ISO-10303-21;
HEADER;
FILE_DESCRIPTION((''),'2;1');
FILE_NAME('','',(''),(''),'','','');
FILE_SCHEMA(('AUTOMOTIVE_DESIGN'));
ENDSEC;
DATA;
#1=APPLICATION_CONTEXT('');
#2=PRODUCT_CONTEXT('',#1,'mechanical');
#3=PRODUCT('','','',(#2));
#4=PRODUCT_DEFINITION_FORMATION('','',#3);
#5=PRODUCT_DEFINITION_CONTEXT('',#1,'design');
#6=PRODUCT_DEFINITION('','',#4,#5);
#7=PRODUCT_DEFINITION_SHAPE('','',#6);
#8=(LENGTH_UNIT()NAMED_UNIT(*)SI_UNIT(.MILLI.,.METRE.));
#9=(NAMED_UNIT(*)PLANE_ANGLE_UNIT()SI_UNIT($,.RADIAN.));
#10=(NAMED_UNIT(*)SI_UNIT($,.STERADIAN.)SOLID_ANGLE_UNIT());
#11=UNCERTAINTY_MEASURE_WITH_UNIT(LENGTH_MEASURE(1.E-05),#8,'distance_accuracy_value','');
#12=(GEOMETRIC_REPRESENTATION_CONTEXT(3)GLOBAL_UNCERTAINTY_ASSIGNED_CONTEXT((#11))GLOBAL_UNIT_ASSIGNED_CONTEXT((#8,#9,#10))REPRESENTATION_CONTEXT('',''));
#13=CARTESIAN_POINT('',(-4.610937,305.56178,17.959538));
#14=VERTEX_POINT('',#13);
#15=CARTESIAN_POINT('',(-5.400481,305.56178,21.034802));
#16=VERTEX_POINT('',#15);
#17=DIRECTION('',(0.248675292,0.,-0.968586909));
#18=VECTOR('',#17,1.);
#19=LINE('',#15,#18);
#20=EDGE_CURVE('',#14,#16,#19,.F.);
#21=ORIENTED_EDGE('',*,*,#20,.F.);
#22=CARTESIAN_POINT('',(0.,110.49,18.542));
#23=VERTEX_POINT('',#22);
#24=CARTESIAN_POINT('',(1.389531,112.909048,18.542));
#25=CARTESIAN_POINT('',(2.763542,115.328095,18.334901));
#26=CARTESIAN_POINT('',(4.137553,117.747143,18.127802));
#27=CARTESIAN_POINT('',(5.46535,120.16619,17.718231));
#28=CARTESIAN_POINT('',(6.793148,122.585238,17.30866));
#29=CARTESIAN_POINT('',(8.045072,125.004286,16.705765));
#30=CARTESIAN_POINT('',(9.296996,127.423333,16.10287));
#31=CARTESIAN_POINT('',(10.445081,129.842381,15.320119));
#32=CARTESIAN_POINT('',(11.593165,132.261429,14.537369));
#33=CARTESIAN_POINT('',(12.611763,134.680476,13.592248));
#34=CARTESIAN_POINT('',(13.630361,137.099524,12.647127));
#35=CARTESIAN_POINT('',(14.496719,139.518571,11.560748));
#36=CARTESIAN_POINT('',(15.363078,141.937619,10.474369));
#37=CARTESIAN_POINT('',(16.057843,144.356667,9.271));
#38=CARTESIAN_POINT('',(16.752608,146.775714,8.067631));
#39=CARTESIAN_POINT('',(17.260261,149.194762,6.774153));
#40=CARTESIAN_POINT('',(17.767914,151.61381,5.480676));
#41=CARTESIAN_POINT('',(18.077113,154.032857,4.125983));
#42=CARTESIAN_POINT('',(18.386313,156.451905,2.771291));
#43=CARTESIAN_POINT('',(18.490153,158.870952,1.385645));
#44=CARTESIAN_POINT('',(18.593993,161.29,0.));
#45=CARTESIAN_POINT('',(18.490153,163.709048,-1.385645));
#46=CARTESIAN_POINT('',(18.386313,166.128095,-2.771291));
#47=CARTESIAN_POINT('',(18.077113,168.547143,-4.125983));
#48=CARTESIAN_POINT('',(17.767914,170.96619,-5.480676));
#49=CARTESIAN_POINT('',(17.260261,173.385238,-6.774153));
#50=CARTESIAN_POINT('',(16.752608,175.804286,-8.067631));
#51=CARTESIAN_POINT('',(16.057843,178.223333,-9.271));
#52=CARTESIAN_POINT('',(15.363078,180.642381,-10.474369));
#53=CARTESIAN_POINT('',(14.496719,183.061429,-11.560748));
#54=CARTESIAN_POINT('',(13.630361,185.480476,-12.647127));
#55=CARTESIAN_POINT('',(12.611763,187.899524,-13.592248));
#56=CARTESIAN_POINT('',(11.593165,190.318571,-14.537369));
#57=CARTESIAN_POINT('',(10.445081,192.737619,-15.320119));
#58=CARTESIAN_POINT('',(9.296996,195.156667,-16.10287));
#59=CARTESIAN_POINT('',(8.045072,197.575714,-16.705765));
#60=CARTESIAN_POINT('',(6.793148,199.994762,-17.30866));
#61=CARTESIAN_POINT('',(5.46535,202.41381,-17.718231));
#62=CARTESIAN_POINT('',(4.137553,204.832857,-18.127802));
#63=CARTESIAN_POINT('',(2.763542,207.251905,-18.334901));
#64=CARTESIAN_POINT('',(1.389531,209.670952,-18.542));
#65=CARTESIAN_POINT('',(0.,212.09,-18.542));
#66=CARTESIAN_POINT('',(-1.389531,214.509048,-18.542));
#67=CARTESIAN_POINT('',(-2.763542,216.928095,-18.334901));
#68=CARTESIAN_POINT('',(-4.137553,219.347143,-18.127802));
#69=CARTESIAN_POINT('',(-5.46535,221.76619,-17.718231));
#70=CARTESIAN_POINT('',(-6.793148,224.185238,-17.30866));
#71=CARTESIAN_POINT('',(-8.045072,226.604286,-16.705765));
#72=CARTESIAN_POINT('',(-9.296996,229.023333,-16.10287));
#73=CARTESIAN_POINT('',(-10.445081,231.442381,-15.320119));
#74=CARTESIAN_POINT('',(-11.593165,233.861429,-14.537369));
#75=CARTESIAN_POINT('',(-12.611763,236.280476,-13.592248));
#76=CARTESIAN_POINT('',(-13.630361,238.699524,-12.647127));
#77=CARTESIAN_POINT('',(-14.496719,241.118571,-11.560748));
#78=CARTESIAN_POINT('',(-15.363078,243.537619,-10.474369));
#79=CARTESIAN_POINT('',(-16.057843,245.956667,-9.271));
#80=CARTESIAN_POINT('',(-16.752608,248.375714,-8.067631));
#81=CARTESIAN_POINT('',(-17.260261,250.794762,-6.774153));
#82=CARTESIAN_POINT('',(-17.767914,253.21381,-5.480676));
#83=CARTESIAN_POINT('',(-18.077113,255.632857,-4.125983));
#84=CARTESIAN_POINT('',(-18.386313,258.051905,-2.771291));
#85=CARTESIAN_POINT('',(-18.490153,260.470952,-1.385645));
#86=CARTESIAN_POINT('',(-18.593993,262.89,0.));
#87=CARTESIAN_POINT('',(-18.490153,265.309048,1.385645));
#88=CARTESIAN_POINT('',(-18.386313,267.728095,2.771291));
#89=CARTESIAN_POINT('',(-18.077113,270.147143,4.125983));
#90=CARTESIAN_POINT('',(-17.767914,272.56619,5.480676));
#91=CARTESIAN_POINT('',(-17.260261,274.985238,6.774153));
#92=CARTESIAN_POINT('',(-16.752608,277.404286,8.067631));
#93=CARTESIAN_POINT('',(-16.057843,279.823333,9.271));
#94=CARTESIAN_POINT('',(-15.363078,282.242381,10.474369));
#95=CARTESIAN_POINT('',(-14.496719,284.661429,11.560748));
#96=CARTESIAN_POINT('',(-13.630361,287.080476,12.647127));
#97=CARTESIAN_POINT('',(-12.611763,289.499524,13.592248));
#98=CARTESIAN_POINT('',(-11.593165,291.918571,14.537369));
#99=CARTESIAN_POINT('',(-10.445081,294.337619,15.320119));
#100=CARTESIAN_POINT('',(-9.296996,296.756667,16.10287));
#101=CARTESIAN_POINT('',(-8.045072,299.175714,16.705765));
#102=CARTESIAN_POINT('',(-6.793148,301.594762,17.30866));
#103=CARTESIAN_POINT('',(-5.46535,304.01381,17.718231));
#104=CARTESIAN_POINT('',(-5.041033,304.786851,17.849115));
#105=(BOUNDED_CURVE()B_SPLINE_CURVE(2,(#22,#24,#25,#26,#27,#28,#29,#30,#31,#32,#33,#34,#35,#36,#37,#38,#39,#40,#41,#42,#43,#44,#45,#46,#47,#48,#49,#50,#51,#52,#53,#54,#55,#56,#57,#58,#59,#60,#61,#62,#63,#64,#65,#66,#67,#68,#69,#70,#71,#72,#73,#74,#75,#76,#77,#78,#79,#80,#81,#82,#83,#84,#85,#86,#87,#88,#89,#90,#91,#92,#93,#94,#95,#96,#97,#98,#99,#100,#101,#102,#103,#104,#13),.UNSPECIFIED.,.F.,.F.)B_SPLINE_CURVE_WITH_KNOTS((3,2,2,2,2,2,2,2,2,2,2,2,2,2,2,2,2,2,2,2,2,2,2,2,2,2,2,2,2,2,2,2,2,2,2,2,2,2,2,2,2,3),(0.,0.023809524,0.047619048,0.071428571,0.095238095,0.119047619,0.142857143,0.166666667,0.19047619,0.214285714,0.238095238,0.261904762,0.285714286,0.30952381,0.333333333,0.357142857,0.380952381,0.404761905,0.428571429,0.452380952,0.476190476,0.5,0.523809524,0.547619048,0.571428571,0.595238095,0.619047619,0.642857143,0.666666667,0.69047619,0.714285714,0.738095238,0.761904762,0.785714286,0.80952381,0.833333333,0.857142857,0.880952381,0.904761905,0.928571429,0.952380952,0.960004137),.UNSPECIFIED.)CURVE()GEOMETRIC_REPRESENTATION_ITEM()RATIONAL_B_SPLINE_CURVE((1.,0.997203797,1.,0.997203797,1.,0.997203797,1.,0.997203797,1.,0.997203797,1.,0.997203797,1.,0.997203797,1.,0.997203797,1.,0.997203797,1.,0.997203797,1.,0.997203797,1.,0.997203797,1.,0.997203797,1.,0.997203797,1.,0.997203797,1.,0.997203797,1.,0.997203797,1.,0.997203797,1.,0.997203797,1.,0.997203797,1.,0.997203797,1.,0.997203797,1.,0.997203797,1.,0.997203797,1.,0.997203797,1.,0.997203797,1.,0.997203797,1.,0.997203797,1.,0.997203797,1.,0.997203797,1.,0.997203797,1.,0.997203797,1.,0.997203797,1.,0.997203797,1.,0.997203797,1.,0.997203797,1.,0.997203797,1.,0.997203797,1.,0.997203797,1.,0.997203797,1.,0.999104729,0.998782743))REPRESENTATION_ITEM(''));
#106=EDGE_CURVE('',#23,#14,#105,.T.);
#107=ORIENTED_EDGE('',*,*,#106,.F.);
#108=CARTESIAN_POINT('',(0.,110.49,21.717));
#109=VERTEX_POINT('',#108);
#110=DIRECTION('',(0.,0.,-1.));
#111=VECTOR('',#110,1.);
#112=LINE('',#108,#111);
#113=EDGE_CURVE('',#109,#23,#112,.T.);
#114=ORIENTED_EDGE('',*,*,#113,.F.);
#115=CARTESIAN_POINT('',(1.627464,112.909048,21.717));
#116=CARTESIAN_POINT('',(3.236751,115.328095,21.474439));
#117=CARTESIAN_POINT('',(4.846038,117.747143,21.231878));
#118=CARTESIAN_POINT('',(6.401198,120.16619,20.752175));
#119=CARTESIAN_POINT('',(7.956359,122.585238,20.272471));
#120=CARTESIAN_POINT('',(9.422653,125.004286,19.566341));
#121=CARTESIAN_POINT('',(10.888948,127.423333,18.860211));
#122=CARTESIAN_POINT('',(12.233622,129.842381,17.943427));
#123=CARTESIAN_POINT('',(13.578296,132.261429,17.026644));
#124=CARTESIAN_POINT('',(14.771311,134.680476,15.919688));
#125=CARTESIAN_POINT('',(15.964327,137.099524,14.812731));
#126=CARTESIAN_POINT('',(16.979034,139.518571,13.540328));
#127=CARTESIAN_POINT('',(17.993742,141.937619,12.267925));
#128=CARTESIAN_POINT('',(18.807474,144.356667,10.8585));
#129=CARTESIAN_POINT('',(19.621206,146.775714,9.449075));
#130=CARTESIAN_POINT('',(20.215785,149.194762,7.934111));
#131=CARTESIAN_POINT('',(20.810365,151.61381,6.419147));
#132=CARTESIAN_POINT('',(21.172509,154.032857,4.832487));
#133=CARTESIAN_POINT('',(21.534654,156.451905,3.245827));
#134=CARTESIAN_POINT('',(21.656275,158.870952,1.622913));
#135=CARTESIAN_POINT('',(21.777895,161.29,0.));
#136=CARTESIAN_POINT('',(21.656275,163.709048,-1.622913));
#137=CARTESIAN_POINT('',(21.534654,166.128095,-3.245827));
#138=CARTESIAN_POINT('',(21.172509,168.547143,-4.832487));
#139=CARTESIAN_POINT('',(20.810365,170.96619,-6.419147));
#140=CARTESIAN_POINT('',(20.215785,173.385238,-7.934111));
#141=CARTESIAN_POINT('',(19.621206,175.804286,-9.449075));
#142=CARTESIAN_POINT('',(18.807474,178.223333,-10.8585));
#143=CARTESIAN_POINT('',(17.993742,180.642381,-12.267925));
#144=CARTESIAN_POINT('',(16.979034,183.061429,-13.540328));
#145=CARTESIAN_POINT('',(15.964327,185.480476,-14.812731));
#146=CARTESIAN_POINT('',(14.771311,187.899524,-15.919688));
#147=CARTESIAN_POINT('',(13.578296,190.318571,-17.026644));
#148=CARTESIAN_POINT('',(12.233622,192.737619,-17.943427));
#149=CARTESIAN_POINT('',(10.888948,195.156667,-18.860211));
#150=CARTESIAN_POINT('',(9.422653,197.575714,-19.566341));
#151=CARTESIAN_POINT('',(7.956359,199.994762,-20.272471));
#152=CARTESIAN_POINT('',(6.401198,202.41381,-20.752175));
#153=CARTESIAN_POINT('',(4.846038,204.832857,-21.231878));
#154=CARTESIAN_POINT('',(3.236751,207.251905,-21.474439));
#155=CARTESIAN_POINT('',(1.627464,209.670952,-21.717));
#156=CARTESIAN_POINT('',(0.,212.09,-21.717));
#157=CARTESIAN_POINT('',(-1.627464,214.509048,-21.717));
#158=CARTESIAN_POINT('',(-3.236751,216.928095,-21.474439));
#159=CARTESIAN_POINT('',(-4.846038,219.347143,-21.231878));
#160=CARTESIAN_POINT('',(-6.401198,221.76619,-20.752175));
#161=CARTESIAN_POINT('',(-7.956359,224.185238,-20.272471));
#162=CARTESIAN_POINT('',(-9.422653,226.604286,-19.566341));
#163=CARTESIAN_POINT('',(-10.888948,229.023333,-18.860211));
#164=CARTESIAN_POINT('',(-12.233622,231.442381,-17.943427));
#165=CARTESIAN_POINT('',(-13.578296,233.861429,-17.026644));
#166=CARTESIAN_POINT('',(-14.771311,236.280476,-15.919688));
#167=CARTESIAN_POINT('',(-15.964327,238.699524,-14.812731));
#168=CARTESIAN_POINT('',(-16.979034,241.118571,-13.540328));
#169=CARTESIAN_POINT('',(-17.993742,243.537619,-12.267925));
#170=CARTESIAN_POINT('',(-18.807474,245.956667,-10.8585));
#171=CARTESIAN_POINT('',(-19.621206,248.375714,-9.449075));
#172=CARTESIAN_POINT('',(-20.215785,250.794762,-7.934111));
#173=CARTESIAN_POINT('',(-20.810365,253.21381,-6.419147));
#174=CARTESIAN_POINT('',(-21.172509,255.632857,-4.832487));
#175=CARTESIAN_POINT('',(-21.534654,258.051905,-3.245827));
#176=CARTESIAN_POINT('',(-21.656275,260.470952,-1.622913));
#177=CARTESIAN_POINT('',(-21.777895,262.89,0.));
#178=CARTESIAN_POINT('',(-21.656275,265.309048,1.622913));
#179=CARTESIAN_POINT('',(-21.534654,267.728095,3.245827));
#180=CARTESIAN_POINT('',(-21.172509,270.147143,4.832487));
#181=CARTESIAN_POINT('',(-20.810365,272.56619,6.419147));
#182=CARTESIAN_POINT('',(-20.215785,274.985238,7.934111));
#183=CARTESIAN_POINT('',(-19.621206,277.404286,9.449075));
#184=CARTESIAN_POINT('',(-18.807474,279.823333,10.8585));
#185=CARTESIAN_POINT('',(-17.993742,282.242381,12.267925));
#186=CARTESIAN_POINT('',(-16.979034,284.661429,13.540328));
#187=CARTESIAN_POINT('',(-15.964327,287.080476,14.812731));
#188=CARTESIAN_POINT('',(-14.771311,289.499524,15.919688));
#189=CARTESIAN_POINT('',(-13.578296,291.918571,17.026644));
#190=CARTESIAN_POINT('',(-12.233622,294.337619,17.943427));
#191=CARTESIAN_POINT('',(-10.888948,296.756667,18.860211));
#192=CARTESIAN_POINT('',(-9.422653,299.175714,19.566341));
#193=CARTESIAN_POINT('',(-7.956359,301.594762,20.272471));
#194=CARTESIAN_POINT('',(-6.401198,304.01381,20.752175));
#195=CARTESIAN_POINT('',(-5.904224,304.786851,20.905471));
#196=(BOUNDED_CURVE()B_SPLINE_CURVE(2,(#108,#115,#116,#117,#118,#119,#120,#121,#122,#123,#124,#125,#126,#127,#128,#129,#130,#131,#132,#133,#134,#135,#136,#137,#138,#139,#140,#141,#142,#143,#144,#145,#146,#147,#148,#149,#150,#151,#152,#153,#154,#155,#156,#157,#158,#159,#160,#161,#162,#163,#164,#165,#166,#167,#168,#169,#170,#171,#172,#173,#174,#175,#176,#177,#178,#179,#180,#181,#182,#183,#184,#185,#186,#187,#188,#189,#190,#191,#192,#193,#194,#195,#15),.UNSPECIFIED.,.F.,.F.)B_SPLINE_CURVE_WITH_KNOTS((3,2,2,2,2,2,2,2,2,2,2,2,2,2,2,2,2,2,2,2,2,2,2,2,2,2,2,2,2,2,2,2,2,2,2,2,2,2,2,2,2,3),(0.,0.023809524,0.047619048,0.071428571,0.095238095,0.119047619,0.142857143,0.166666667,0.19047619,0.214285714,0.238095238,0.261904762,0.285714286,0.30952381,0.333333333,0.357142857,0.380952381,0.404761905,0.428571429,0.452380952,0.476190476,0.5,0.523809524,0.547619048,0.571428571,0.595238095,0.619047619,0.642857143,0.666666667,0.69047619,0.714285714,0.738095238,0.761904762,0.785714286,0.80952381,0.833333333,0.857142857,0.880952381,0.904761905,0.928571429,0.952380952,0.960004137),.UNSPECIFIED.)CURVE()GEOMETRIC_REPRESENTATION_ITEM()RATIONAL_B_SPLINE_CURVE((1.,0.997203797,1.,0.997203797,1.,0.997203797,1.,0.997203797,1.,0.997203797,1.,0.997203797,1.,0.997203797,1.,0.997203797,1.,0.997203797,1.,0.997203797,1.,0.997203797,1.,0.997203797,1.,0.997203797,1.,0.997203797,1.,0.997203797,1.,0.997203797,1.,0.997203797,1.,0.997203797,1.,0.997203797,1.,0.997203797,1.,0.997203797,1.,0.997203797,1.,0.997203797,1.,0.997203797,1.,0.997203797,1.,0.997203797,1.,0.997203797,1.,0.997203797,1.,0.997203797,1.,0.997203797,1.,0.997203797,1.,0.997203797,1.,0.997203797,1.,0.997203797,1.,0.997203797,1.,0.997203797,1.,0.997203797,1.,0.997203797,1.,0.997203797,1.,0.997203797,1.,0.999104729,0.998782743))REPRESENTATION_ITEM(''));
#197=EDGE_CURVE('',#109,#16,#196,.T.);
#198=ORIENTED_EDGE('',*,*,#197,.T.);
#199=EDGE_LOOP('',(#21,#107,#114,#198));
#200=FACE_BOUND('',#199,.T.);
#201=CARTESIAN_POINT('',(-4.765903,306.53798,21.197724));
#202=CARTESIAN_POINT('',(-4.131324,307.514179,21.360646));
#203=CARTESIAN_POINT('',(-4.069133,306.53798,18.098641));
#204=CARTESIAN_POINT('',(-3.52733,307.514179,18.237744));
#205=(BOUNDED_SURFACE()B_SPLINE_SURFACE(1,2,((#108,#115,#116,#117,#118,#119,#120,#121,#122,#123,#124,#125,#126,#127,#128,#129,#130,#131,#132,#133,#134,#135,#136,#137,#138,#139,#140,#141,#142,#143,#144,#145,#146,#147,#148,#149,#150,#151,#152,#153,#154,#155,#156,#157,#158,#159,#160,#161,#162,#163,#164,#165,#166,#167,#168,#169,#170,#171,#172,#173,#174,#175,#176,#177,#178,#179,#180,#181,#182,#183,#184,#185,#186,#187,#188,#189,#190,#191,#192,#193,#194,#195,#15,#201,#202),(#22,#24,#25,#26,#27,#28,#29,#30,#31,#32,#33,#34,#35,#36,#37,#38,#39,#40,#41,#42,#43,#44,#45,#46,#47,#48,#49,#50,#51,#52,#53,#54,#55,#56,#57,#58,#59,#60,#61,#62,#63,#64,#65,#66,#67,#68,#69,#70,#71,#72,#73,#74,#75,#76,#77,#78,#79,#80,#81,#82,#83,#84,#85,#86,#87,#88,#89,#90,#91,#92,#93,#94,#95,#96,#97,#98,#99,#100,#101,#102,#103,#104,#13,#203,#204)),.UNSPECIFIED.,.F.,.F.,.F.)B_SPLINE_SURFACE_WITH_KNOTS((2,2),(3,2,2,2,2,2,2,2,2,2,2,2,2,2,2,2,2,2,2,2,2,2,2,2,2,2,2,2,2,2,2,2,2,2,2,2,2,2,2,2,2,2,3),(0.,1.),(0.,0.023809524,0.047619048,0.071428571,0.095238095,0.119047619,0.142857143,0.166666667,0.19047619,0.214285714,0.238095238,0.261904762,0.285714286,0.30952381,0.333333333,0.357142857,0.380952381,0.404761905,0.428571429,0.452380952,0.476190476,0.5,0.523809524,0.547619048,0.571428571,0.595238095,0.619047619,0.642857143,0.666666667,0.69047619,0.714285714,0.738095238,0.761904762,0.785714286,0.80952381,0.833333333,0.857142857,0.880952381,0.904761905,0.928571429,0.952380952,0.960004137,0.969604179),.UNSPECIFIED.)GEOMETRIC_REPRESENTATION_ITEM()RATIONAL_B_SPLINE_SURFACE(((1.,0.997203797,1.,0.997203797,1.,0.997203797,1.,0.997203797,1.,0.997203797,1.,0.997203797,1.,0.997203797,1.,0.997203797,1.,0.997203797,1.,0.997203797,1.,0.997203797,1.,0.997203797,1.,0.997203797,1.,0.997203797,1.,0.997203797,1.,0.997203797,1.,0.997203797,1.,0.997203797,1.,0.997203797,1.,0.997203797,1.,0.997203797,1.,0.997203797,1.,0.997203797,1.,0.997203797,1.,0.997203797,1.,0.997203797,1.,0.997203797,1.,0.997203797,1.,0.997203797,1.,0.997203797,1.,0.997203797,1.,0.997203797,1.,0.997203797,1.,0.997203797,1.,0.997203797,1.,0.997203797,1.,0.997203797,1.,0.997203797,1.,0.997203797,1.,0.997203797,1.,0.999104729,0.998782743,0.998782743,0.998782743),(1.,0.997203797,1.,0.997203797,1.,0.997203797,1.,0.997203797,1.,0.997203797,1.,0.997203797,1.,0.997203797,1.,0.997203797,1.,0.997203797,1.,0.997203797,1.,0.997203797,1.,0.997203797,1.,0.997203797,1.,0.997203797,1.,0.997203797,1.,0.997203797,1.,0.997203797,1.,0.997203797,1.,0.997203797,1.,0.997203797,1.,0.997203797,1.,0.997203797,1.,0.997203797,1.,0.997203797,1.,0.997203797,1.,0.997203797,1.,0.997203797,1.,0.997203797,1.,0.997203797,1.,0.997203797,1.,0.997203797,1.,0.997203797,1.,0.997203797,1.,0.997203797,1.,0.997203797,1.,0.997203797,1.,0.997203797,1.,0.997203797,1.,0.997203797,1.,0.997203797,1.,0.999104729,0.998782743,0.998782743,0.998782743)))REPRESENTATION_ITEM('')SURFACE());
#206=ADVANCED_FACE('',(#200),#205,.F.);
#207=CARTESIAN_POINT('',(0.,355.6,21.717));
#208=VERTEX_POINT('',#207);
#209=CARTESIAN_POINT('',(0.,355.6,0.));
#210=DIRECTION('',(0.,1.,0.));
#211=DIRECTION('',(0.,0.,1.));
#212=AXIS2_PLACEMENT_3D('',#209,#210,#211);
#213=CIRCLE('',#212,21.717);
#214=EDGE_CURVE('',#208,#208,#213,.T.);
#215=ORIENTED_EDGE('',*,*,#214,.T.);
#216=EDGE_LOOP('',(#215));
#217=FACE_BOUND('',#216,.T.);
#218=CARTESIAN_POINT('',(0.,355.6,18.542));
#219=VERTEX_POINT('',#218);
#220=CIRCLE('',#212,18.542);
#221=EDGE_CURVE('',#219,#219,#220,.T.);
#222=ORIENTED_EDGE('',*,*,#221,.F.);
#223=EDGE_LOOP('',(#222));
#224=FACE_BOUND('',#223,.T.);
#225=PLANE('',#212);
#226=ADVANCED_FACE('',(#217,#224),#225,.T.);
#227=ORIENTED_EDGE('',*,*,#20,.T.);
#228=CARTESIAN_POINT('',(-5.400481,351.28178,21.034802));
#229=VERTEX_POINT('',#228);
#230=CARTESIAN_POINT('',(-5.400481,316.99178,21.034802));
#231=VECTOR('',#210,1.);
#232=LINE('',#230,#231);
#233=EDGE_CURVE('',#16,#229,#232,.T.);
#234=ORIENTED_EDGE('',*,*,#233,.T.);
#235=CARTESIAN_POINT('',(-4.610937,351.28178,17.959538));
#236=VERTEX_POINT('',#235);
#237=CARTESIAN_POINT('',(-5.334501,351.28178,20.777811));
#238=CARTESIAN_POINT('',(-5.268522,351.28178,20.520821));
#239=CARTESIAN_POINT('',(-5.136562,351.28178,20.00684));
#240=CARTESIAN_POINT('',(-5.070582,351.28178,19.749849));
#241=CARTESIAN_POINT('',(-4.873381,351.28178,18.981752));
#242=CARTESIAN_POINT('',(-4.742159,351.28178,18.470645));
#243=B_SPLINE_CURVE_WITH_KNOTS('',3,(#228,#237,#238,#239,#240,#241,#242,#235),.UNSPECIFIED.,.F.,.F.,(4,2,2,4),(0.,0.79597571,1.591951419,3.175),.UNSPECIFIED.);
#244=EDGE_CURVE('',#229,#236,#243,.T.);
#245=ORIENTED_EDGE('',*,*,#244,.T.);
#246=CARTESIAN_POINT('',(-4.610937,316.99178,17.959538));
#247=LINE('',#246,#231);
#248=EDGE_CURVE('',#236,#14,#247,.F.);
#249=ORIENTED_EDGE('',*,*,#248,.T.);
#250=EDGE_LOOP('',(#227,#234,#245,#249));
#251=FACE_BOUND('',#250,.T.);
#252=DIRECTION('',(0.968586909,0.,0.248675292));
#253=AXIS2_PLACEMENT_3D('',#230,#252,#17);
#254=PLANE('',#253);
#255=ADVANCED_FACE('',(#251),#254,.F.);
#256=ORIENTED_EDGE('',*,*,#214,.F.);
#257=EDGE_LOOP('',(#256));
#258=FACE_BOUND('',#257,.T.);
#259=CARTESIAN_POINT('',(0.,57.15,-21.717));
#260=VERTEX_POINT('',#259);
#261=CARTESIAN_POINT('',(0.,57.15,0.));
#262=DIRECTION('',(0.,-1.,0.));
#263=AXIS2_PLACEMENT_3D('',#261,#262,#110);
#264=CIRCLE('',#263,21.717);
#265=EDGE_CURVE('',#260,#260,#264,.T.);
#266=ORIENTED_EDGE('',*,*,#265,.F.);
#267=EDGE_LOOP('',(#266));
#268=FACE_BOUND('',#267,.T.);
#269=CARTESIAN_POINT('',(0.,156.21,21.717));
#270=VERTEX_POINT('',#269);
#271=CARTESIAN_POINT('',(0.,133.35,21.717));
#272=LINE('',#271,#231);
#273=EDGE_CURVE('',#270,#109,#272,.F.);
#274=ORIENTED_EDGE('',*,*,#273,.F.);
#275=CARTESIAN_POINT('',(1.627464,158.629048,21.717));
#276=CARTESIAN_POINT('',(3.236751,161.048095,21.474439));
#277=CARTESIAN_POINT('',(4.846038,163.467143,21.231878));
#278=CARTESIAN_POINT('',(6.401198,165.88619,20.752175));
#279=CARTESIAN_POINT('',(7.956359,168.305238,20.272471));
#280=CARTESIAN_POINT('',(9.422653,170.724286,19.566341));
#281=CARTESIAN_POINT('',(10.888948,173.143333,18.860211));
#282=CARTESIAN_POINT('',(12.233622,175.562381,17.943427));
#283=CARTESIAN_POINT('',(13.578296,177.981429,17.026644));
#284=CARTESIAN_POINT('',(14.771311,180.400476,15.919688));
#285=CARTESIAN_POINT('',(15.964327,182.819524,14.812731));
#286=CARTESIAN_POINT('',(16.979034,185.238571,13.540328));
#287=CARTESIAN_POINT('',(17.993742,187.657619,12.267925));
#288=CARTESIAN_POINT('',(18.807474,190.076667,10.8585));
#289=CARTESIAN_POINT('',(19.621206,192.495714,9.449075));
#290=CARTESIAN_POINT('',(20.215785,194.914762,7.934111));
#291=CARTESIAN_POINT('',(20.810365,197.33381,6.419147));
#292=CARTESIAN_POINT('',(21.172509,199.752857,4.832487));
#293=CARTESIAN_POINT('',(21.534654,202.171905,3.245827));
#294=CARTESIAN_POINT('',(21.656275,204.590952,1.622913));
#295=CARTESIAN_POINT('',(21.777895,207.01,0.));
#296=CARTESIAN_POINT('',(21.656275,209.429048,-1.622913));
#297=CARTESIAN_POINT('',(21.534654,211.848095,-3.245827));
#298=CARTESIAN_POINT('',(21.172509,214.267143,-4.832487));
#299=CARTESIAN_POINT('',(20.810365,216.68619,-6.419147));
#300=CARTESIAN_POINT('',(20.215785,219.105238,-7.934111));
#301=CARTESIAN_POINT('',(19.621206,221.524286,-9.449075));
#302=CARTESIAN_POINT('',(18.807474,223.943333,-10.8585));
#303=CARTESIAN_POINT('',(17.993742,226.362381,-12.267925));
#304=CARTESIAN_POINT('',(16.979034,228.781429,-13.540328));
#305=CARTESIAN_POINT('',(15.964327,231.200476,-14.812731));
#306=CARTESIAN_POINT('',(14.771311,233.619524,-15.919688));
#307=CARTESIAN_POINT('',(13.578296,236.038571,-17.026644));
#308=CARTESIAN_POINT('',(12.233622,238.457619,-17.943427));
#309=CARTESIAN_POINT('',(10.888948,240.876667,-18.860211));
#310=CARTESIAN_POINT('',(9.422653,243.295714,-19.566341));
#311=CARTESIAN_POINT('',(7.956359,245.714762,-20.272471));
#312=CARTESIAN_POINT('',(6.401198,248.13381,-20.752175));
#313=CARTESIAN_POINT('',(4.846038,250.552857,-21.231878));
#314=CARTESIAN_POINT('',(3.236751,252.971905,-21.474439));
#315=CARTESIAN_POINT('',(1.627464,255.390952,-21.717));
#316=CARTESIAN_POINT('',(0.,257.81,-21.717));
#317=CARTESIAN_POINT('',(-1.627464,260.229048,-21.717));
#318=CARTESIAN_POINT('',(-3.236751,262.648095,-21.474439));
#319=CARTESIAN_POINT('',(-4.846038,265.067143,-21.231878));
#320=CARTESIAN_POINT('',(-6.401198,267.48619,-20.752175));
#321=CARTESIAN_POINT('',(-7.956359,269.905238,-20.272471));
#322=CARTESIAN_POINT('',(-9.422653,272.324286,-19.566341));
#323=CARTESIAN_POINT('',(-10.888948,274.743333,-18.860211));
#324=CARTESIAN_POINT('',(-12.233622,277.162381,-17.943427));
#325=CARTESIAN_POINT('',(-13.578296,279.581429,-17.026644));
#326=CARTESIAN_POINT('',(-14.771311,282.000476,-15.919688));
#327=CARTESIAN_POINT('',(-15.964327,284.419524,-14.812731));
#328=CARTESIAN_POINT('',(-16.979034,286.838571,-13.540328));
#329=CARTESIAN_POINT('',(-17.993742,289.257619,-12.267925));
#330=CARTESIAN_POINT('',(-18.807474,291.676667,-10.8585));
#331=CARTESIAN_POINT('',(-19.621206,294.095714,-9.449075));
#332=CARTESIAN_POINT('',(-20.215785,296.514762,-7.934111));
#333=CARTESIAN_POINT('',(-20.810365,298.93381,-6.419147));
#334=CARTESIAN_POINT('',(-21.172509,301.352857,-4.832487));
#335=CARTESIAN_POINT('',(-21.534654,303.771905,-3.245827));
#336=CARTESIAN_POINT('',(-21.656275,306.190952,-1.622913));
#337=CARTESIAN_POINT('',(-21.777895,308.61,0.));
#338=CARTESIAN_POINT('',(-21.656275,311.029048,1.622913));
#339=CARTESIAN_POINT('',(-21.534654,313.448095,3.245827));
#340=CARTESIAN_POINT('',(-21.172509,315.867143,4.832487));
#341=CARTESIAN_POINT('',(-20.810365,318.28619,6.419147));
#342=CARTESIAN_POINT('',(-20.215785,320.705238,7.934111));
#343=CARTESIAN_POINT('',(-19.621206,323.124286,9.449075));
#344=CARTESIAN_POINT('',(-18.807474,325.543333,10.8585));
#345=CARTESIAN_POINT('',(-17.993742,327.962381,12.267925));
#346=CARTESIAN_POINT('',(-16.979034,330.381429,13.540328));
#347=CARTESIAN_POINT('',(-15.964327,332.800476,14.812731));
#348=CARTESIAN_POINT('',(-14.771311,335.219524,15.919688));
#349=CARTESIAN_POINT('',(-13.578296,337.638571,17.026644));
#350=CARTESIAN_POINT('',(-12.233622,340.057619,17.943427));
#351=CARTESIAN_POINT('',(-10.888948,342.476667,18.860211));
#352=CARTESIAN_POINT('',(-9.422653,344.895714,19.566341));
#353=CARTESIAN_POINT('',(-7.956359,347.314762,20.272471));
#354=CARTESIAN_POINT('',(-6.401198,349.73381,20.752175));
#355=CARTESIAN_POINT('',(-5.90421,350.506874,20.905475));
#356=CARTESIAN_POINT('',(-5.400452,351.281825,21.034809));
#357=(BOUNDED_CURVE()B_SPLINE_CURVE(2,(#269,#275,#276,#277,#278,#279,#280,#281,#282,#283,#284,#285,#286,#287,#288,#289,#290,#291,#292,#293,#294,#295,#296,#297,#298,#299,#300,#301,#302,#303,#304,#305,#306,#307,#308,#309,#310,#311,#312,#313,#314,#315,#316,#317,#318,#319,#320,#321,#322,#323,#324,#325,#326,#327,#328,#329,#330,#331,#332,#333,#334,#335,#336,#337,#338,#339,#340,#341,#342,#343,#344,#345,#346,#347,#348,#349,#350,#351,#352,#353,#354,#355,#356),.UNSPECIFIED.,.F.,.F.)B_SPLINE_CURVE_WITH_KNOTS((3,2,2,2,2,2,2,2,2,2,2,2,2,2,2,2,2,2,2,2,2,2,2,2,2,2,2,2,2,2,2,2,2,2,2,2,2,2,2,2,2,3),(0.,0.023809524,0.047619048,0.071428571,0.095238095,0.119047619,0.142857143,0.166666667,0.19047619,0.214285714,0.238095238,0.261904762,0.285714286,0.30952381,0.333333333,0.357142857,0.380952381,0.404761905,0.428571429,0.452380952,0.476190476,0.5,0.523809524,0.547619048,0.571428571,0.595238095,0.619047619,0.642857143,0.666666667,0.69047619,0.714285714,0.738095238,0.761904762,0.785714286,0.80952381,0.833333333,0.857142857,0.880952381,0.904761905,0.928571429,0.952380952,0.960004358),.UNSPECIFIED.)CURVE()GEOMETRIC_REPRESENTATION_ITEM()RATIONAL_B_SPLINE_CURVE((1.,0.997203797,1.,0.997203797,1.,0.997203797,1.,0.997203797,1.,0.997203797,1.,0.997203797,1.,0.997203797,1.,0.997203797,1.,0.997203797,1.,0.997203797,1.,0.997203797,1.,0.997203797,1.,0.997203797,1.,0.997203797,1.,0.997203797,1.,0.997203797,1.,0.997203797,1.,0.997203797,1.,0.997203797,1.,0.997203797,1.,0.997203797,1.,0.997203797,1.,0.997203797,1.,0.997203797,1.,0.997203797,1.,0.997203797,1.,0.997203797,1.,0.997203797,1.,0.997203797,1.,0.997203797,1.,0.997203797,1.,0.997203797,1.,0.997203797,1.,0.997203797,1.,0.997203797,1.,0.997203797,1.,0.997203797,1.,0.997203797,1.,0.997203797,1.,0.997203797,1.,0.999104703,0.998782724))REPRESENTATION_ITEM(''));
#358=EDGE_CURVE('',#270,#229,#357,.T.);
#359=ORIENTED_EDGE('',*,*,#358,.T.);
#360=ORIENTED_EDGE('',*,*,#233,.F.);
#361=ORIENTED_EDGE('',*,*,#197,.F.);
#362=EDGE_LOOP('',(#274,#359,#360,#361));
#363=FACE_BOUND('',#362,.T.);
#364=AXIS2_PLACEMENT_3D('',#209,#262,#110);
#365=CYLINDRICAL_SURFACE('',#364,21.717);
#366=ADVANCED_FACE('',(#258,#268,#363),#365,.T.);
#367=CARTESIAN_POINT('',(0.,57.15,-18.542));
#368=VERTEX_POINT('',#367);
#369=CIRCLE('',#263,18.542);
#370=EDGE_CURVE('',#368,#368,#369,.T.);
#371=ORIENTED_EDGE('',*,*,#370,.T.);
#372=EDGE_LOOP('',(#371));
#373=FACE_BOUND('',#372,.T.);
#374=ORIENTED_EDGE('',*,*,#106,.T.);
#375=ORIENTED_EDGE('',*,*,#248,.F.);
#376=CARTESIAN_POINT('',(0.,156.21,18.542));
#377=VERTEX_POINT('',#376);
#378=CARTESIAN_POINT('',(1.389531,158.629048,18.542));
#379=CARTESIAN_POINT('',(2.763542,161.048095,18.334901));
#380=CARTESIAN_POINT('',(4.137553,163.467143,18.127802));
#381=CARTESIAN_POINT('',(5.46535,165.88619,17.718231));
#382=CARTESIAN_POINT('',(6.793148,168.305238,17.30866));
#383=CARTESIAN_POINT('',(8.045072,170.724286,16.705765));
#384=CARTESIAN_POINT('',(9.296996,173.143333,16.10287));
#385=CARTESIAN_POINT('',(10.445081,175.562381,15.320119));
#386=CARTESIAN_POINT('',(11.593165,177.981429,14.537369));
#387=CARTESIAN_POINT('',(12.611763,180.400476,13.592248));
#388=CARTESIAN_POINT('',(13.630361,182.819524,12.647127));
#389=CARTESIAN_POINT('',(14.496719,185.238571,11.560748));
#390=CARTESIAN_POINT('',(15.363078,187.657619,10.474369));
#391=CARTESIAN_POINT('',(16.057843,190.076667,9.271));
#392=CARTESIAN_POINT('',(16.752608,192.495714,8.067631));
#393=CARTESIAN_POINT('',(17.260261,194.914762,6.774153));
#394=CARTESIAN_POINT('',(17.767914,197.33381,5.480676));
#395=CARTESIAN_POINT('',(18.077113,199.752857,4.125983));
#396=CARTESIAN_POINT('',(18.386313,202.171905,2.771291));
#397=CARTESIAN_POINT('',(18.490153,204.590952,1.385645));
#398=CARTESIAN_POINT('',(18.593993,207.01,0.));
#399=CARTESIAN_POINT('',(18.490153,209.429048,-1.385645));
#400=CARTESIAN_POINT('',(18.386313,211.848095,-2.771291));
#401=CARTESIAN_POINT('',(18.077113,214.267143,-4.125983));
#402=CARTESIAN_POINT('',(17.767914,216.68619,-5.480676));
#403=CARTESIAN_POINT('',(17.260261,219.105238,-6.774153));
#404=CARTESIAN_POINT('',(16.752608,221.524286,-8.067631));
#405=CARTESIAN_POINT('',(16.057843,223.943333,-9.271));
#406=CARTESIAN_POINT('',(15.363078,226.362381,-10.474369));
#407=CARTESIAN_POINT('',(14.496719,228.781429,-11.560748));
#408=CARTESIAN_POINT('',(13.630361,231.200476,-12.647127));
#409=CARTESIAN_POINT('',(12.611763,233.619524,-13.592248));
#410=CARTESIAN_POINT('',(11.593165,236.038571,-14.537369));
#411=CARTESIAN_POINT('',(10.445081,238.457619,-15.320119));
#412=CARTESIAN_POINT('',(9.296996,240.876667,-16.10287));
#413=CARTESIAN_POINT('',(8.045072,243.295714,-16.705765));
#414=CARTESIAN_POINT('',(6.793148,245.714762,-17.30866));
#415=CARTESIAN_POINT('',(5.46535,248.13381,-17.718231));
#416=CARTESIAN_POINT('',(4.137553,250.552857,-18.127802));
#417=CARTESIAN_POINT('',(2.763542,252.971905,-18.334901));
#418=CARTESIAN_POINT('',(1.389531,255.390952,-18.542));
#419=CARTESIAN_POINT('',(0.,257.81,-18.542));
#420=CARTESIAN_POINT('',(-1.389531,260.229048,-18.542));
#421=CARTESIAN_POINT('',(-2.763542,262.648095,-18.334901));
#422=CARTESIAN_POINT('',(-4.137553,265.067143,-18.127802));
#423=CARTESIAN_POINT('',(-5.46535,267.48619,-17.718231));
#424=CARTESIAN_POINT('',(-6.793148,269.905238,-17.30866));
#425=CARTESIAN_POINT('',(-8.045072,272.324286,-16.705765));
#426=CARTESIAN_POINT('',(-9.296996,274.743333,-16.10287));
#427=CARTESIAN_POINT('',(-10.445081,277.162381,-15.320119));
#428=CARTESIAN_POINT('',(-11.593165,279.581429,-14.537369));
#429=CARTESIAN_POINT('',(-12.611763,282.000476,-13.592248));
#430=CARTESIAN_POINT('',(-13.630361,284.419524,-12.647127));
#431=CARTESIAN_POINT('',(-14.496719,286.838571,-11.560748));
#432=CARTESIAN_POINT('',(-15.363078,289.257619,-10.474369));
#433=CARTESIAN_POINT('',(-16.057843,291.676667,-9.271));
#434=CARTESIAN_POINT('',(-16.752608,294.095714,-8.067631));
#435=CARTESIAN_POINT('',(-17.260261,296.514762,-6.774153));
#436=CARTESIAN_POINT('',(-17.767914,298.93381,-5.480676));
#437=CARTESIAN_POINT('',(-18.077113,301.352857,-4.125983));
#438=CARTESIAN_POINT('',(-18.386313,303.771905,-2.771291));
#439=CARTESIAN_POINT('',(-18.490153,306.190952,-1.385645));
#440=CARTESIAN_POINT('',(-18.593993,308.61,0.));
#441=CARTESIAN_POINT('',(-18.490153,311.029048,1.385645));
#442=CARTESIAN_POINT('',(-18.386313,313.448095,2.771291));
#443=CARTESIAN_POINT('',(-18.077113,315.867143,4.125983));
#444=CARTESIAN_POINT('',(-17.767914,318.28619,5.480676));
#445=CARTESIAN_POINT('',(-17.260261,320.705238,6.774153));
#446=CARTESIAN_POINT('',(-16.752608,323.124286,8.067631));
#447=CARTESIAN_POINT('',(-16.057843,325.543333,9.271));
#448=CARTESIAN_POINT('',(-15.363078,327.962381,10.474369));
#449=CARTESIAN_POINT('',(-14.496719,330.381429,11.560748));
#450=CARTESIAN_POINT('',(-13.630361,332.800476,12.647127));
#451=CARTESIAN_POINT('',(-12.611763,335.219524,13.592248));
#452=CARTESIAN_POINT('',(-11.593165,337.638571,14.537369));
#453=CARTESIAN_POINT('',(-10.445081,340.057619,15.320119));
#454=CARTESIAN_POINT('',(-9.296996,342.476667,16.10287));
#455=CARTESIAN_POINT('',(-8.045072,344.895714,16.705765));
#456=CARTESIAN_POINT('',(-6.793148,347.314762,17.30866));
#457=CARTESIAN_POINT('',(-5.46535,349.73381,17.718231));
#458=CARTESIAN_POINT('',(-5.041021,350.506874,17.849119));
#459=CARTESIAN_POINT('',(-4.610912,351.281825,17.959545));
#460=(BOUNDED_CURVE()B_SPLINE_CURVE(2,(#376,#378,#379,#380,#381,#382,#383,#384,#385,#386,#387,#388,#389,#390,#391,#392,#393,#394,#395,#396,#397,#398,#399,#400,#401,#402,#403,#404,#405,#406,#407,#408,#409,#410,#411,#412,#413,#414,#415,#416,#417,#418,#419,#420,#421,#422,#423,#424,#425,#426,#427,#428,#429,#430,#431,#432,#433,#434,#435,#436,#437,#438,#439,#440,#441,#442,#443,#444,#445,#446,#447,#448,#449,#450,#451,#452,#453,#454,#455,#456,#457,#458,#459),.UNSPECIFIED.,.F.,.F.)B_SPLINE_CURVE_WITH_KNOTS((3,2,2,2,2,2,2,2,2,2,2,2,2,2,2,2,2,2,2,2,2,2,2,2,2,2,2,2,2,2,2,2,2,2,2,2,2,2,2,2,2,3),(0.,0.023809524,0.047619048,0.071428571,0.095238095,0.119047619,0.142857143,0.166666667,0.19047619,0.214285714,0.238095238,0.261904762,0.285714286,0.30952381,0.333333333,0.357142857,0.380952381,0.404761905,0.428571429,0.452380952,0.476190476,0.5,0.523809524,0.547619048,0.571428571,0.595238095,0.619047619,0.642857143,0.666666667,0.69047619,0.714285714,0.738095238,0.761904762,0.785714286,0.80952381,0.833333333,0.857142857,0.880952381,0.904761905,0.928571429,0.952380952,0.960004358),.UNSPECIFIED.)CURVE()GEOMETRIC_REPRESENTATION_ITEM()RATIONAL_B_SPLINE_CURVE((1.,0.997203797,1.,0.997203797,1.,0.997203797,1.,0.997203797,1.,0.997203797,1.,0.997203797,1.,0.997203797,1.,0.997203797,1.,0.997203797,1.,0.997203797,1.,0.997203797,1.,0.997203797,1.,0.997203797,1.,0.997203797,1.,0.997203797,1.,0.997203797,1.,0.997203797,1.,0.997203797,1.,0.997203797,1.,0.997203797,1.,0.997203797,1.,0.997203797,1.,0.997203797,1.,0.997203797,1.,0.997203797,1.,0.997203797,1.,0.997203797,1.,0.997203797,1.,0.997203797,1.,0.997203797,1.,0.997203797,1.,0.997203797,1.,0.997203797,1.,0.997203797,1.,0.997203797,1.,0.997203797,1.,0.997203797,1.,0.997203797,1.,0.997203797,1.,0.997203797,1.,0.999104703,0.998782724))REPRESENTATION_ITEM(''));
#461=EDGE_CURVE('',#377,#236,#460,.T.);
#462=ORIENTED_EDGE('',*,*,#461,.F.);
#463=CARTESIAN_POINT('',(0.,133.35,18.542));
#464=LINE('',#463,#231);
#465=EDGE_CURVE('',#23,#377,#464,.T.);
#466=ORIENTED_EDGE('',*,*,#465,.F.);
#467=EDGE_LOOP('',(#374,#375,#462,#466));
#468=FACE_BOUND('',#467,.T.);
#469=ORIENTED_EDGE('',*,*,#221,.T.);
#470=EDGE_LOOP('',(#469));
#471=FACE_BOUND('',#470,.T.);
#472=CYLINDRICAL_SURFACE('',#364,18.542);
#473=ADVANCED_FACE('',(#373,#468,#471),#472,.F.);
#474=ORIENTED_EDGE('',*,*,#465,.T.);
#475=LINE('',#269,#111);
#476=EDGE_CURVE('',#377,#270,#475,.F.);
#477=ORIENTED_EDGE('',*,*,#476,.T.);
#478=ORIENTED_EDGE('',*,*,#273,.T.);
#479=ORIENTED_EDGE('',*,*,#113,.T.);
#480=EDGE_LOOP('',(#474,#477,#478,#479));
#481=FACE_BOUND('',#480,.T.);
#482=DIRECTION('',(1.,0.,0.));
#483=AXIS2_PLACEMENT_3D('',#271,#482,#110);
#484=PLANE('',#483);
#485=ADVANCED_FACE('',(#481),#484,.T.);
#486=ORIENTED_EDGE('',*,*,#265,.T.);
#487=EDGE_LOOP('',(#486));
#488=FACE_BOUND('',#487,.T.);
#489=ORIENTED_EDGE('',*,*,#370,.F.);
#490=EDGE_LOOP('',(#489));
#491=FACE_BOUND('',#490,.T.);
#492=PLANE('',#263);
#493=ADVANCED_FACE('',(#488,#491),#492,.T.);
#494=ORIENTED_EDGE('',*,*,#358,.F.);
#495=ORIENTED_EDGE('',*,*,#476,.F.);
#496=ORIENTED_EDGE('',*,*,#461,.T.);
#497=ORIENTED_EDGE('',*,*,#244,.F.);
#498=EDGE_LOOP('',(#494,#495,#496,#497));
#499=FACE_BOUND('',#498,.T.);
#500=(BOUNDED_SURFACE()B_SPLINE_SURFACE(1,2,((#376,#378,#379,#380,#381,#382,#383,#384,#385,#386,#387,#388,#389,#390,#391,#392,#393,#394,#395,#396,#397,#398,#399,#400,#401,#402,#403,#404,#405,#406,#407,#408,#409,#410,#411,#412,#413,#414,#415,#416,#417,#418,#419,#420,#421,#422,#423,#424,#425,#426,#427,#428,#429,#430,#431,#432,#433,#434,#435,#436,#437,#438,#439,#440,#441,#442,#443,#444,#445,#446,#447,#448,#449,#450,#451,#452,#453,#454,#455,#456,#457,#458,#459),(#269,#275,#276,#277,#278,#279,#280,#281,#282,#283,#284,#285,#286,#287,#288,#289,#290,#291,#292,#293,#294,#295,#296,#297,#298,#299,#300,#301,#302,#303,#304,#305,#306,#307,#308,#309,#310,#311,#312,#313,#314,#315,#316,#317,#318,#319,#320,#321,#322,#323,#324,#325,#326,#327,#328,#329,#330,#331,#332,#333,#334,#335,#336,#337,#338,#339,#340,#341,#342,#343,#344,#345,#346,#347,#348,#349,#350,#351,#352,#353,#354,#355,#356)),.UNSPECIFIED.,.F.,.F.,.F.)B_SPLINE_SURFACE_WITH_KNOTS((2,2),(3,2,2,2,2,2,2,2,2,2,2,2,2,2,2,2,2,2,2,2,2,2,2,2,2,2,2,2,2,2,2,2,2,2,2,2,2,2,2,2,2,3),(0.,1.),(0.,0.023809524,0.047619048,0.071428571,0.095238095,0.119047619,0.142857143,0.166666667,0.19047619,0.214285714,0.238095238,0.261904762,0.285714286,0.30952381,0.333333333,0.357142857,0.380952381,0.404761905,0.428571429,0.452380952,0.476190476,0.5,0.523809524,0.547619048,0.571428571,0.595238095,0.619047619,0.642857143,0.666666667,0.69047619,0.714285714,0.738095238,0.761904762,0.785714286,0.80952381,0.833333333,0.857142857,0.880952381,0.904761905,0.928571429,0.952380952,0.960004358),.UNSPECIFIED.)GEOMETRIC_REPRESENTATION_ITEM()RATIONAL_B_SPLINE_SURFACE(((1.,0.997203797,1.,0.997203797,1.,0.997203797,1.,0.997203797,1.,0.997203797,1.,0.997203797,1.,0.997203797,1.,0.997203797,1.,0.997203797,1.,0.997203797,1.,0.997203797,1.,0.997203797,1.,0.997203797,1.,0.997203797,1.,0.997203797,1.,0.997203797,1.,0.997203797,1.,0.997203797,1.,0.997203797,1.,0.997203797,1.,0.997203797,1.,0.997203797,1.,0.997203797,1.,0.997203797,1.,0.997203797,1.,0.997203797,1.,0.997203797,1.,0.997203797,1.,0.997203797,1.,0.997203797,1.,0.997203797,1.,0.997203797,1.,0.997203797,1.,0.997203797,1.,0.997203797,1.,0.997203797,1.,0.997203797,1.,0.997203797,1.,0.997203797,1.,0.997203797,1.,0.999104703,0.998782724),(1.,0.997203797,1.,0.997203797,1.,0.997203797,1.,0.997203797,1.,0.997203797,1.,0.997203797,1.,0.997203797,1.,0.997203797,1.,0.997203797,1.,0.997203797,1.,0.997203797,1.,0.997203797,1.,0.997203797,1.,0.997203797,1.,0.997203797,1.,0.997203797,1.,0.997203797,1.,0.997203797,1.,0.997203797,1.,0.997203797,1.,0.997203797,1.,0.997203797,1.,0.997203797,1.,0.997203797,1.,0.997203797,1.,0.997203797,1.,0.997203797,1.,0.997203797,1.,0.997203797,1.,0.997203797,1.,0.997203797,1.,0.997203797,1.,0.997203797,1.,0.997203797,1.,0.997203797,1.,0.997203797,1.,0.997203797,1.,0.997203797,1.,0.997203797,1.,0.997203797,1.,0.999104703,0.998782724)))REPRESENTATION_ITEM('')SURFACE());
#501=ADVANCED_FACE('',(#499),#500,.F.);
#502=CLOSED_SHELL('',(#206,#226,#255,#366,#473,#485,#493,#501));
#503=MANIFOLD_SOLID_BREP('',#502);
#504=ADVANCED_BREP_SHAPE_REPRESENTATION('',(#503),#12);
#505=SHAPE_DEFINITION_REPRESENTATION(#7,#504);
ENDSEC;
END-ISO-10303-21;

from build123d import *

# Parameters (mm, degrees)
SKETCH1_R           = 21.717
SKETCH1_R_2         = 18.542
BOSS_EXTRUDE1_DEPTH = 355.6
CUT_SWEEP1_PITCH    = 203.2
SKETCH17_R          = 21.717
CUT_EXTRUDE3_DEPTH  = 57.15


with BuildPart() as part:
    # Sketch1 → Boss-Extrude1 (new body)
    with BuildSketch(Plane(origin=(0, 0, 0), x_dir=(1, 0, 0), z_dir=(0, 1, 0))):
        with Locations(Location((0, 0, 0), (0, 0, 270))):
            Circle(SKETCH1_R)
        with Locations(Location((0, 0, 0), (0, 0, 270))):
            Circle(SKETCH1_R_2, mode=Mode.SUBTRACT)
    extrude(amount=BOSS_EXTRUDE1_DEPTH)

    # Cut-Sweep1: the profile of Sketch6 profile screwed along a right-hand helix of 0.96 turns, 42 arcs to a turn; built about Z, then put on its axis
    cut_sweep1_z = Axis((0, 0, 0), (0, 0, 1))
    cut_sweep1_corners = [(18.542, 0, -22.86), (21.7173, 0, -22.86), (21.7173, 0, 22.86), (18.542, 0, 22.86)]
    with BuildLine(mode=Mode.PRIVATE) as cut_sweep1_profile:
        Line(cut_sweep1_corners[0], cut_sweep1_corners[1])
        Line(cut_sweep1_corners[1], cut_sweep1_corners[2])
        Line(cut_sweep1_corners[2], cut_sweep1_corners[3])
        Line(cut_sweep1_corners[3], cut_sweep1_corners[0])
    cut_sweep1_cap = Face(cut_sweep1_profile.wire())
    cut_sweep1_turn_angles = [0, 4.285714286, 8.571428571, 12.857142857, 17.142857143, 21.428571429, 25.714285714, 30, 34.285714286, 38.571428571, 42.857142857, 47.142857143, 51.428571429, 55.714285714, 60, 64.285714286, 68.571428571, 72.857142857, 77.142857143, 81.428571429, 85.714285714, 90, 94.285714286, 98.571428571, 102.857142857, 107.142857143, 111.428571429, 115.714285714, 120, 124.285714286, 128.571428571, 132.857142857, 137.142857143, 141.428571429, 145.714285714, 150, 154.285714286, 158.571428571, 162.857142857, 167.142857143, 171.428571429, 175.714285714, 180, 184.285714286, 188.571428571, 192.857142857, 197.142857143, 201.428571429, 205.714285714, 210, 214.285714286, 218.571428571, 222.857142857, 227.142857143, 231.428571429, 235.714285714, 240, 244.285714286, 248.571428571, 252.857142857, 257.142857143, 261.428571429, 265.714285714, 270, 274.285714286, 278.571428571, 282.857142857, 287.142857143, 291.428571429, 295.714285714, 300, 304.285714286, 308.571428571, 312.857142857, 317.142857143, 321.428571429, 325.714285714, 330, 334.285714286, 338.571428571, 342.857142857, 344.228571429, 345.6]
    cut_sweep1_turn_weights = [1, 0.9972037971811801, 1, 0.9972037971811801, 1, 0.9972037971811801, 1, 0.9972037971811801, 1, 0.9972037971811801, 1, 0.9972037971811801, 1, 0.9972037971811801, 1, 0.9972037971811801, 1, 0.9972037971811801, 1, 0.9972037971811801, 1, 0.9972037971811801, 1, 0.9972037971811801, 1, 0.9972037971811801, 1, 0.9972037971811801, 1, 0.9972037971811801, 1, 0.9972037971811801, 1, 0.9972037971811801, 1, 0.9972037971811801, 1, 0.9972037971811801, 1, 0.9972037971811801, 1, 0.9972037971811801, 1, 0.9972037971811801, 1, 0.9972037971811801, 1, 0.9972037971811801, 1, 0.9972037971811801, 1, 0.9972037971811801, 1, 0.9972037971811801, 1, 0.9972037971811801, 1, 0.9972037971811801, 1, 0.9972037971811801, 1, 0.9972037971811801, 1, 0.9972037971811801, 1, 0.9972037971811801, 1, 0.9972037971811801, 1, 0.9972037971811801, 1, 0.9972037971811801, 1, 0.9972037971811801, 1, 0.9972037971811801, 1, 0.9972037971811801, 1, 0.9972037971811801, 1, 0.9997135489685032, 1]
    cut_sweep1_turn_rails = [Edge.make_bspline([Vector(p[0], p[1], 0).rotate(cut_sweep1_z, cut_sweep1_turn_angles[k]) / cut_sweep1_turn_weights[k] + Vector(0, 0, p[2] + CUT_SWEEP1_PITCH * cut_sweep1_turn_angles[k] / 360) for k in range(83)], [0, 0, 0, 1, 1, 2, 2, 3, 3, 4, 4, 5, 5, 6, 6, 7, 7, 8, 8, 9, 9, 10, 10, 11, 11, 12, 12, 13, 13, 14, 14, 15, 15, 16, 16, 17, 17, 18, 18, 19, 19, 20, 20, 21, 21, 22, 22, 23, 23, 24, 24, 25, 25, 26, 26, 27, 27, 28, 28, 29, 29, 30, 30, 31, 31, 32, 32, 33, 33, 34, 34, 35, 35, 36, 36, 37, 37, 38, 38, 39, 39, 40, 40, 41, 41, 41], 2, cut_sweep1_turn_weights) for p in cut_sweep1_corners]
    cut_sweep1_turn_sides = [Face.make_surface_from_curves(cut_sweep1_turn_rails[p[0]], cut_sweep1_turn_rails[p[1]]) for p in [(0, 1), (1, 2), (2, 3), (3, 0)]]
    cut_sweep1 = Plane(origin=(0, 133.35, 0), x_dir=(0, 0, 1), z_dir=(0, 1, 0)) * Solid(Shell([*cut_sweep1_turn_sides, cut_sweep1_cap, cut_sweep1_cap.rotate(cut_sweep1_z, 345.6).moved(Location((0, 0, CUT_SWEEP1_PITCH * 345.6 / 360)))]))
    add(cut_sweep1, mode=Mode.SUBTRACT)

    # Sketch17 → Cut-Extrude3 (cut)
    with BuildSketch(Plane.XZ):
        with Locations(Location((0, 0, 0), (0, 0, 270))):
            Circle(SKETCH17_R)
    extrude(amount=-CUT_EXTRUDE3_DEPTH, mode=Mode.SUBTRACT)


solid = part.part
